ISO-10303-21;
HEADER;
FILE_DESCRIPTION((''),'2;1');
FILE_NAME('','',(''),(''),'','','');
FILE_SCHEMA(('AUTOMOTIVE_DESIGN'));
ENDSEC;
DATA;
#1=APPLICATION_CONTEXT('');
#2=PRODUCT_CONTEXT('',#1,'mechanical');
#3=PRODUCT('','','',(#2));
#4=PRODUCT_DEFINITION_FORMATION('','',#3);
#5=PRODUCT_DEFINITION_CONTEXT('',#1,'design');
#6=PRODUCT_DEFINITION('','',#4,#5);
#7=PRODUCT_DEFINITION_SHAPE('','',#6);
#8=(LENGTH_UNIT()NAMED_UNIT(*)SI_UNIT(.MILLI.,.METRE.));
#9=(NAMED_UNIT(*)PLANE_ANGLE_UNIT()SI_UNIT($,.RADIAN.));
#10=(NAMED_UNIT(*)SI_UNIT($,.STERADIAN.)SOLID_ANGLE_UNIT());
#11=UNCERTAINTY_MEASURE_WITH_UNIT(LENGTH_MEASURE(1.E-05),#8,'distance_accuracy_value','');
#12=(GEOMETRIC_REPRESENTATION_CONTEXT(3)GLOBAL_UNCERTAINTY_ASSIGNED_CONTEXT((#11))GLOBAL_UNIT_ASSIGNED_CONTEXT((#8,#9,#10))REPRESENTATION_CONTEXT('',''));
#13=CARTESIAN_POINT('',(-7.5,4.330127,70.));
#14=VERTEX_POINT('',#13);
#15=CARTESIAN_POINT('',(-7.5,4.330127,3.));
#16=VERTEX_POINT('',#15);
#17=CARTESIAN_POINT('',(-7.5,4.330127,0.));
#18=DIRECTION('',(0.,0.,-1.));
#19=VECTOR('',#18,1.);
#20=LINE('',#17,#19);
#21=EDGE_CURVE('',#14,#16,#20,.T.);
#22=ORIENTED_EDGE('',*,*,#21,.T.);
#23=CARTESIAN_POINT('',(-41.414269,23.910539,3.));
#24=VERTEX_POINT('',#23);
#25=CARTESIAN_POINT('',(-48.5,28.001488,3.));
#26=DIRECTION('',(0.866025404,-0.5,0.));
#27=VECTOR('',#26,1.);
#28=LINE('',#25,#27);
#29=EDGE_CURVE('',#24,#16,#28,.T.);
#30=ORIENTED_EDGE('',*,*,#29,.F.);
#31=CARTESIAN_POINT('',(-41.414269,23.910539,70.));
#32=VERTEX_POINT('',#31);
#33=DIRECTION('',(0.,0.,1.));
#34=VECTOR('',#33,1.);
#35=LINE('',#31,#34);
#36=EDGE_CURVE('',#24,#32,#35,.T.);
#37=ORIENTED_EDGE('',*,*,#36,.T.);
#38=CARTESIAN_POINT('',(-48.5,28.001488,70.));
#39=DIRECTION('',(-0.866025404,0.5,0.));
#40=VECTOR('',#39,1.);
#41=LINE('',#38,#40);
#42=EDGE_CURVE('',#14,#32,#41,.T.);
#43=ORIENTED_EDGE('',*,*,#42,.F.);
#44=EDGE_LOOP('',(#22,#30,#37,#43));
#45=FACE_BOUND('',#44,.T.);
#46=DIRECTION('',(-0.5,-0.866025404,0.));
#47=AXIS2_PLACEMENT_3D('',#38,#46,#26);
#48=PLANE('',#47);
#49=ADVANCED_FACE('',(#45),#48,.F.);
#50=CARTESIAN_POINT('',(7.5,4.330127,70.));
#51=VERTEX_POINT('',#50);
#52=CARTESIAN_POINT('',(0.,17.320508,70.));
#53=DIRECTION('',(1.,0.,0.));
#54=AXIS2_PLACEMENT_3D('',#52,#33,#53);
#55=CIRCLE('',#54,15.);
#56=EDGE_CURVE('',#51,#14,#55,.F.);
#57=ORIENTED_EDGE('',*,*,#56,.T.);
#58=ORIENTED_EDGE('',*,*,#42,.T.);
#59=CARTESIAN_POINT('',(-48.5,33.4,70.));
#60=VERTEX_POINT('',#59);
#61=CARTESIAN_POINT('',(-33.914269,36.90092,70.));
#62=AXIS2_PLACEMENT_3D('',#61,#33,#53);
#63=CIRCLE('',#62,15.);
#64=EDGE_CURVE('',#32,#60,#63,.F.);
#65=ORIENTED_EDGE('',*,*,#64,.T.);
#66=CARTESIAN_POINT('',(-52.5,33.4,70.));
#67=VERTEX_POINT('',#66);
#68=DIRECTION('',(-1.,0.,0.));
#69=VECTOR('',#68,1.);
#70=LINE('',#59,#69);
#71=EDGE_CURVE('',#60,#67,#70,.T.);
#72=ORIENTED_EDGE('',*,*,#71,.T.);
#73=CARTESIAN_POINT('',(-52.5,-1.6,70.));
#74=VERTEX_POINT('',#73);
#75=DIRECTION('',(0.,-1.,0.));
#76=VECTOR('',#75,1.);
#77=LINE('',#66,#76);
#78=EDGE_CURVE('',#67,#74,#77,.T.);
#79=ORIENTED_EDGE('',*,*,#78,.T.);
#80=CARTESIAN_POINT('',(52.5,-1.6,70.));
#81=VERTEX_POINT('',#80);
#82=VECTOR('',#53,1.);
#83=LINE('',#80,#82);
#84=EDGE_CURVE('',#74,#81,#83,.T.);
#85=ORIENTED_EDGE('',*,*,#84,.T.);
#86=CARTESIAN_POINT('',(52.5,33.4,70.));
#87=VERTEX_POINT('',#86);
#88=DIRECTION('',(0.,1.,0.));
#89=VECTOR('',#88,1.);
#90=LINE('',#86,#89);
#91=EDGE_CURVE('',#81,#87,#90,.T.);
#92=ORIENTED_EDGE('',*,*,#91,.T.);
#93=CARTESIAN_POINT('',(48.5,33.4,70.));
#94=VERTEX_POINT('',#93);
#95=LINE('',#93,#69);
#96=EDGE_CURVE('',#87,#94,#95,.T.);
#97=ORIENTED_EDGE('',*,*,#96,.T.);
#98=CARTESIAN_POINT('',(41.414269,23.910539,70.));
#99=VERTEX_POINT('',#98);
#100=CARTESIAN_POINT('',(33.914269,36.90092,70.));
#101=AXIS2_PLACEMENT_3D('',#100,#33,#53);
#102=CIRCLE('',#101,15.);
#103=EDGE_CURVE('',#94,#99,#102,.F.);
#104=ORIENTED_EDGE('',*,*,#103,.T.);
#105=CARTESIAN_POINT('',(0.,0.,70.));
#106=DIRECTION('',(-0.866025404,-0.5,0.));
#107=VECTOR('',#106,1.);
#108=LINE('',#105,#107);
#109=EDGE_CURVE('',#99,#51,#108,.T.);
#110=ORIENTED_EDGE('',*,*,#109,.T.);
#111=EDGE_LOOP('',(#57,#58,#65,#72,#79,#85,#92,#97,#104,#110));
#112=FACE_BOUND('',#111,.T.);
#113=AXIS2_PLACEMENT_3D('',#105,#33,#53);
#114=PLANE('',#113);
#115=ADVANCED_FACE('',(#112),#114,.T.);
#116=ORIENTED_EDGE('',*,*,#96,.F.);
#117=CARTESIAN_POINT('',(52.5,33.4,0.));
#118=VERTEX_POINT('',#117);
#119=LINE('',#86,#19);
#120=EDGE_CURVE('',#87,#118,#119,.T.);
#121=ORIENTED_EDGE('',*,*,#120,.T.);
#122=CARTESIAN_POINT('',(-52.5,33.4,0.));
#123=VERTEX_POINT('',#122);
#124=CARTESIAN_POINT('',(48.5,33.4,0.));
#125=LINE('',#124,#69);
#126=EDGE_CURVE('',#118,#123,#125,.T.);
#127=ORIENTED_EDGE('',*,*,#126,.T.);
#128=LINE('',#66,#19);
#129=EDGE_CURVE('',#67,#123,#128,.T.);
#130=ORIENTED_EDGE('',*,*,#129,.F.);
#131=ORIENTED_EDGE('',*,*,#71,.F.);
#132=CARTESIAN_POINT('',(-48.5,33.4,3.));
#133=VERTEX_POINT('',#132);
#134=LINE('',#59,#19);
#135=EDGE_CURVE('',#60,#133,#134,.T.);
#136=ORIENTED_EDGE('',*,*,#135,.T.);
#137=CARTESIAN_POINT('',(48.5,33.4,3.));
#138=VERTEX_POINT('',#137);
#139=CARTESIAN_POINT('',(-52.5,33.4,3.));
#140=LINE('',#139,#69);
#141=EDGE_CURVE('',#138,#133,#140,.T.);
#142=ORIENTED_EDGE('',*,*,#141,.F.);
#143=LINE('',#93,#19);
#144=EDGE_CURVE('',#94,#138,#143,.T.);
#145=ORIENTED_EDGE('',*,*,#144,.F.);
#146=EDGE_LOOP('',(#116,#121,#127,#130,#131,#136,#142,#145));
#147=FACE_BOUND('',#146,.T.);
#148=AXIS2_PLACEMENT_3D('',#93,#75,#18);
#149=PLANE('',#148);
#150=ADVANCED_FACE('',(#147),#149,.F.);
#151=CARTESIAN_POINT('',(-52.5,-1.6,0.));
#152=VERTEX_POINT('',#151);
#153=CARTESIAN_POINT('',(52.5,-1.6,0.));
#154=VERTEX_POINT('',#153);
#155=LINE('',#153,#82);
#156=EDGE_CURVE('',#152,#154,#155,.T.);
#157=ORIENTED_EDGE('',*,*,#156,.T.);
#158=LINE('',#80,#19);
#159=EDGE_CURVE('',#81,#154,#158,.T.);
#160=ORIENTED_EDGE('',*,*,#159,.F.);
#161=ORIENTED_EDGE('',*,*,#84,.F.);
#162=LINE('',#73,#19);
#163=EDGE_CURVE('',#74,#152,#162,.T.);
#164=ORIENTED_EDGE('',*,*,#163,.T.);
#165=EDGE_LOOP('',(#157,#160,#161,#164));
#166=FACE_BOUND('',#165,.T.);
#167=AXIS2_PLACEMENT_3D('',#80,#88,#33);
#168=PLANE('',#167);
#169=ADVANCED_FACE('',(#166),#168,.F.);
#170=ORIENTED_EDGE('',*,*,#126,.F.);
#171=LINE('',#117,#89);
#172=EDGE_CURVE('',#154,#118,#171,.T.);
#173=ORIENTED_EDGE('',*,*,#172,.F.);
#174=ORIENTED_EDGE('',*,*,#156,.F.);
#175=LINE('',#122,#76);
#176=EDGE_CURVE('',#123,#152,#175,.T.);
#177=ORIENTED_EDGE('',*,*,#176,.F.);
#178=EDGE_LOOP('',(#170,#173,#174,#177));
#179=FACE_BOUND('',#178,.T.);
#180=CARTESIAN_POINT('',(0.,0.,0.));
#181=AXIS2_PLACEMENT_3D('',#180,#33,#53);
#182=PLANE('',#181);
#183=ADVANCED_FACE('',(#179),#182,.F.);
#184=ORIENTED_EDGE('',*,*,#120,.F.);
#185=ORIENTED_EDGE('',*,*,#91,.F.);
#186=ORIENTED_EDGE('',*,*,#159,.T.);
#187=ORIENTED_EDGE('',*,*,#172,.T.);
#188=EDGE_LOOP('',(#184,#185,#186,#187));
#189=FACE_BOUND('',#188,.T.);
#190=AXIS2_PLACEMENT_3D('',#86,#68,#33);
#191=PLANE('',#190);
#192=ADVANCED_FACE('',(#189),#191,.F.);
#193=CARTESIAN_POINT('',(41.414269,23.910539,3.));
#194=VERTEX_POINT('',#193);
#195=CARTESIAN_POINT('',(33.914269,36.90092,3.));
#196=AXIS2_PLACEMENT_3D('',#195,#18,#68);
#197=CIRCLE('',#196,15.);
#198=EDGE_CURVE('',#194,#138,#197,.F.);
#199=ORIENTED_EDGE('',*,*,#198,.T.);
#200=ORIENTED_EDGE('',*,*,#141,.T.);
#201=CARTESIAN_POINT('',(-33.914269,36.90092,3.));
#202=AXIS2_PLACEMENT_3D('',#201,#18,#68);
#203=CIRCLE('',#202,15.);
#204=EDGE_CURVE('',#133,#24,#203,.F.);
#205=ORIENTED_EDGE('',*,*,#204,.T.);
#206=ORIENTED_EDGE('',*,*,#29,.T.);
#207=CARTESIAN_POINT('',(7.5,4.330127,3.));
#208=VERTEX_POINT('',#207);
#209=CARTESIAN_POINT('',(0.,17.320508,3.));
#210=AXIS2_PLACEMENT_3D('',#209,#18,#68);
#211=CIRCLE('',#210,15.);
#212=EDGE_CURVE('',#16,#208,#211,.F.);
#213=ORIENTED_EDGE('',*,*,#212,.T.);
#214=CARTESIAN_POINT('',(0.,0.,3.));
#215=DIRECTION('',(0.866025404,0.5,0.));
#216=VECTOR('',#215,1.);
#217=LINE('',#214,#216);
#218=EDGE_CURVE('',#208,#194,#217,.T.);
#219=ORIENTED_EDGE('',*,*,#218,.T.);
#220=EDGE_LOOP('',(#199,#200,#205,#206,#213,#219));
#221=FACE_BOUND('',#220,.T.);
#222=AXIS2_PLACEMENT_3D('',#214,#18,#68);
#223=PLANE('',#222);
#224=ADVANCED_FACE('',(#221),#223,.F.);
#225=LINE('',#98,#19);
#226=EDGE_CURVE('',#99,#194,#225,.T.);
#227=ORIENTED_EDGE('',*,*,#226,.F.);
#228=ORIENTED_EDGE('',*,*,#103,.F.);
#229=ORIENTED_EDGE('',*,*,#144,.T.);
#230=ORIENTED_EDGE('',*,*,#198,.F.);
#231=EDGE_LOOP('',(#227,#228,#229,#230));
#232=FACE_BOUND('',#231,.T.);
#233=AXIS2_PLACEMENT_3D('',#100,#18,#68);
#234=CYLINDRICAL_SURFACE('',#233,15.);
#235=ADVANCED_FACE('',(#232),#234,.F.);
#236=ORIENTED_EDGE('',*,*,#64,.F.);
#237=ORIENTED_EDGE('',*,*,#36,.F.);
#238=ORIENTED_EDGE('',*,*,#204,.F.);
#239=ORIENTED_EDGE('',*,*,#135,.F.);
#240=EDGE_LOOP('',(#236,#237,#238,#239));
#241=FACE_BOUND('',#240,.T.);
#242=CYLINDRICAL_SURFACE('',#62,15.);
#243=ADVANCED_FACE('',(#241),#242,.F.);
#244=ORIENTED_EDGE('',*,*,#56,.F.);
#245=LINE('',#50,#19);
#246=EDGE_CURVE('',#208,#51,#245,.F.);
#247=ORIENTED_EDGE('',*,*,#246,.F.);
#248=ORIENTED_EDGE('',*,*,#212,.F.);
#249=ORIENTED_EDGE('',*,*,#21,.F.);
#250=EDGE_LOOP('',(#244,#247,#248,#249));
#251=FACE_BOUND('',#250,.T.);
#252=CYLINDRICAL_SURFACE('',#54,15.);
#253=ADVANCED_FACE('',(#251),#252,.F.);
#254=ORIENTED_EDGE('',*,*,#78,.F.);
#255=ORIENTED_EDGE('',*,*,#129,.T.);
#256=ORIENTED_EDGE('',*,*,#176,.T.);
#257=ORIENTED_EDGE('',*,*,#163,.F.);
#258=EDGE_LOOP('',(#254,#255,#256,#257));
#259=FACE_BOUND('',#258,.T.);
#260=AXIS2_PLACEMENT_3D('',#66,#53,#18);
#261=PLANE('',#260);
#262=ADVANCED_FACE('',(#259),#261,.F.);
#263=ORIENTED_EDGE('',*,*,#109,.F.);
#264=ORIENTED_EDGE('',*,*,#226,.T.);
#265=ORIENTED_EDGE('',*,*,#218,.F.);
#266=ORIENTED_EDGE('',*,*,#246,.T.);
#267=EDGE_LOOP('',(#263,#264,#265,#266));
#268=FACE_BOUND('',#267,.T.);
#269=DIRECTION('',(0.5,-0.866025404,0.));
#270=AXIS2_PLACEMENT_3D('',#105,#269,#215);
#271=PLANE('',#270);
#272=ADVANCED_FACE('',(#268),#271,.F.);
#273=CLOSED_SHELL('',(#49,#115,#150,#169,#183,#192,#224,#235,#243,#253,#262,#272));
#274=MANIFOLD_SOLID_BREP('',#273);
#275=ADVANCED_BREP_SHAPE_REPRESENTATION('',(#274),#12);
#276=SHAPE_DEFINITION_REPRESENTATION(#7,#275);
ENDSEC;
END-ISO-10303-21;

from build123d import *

# Parameters (mm, degrees)
BOSS_EXTRU_1_DEPTH = 70
CONG_1_R           = 15
ESQUISSE2_W        = 105
ESQUISSE2_H        = 35
BOSS_EXTRU_2_DEPTH = 3


with BuildPart() as part:
    # Esquisse1 → Boss.-Extru.1 (new body)
    with BuildSketch(Plane.XY):
        Polygon((0, 0), (48.5, 28.001488056), (48.5, 33.4), (52.5, 33.4), (52.5, -1.6), (-52.5, -1.6), (-52.5, 33.4), (-48.5, 33.4), (-48.5, 28.001488056), align=None)
    extrude(amount=BOSS_EXTRU_1_DEPTH)

    # Congé1
    # the kernel refuses this fillet: 15 mm, written as the material it adds along each edge
    with BuildSketch(Plane(origin=(0, 0, 0), x_dir=(0.866025403784438, 0.5000000000000011, 0), z_dir=(0, 0, 1))) as cong_1_piece_1:
        with BuildLine():
            CenterArc((CONG_1_R * 0.57735026919, CONG_1_R), CONG_1_R, 210, 60)
            Line((-CONG_1_R * 0.288675134595, CONG_1_R * 0.5), (-CONG_1_R * 0.305995642671, CONG_1_R * 0.49))
            Line((-CONG_1_R * 0.305995642671, CONG_1_R * 0.49), (-CONG_1_R * 0.0115470053838, -CONG_1_R * 0.02))
            Line((-CONG_1_R * 0.0115470053838, -CONG_1_R * 0.02), (CONG_1_R * 0.57735026919, -CONG_1_R * 0.02))
            Line((CONG_1_R * 0.57735026919, -CONG_1_R * 0.02), (CONG_1_R * 0.57735026919, 0))
        make_face()
    extrude(amount=70)
    with BuildSketch(Plane(origin=(48.5, 28.001488056, 0), x_dir=(-0.8660254037844379, -0.5000000000000011, 0), z_dir=(0, 0, 1))) as cong_1_piece_2:
        with BuildLine():
            CenterArc((8.181897743, -15), CONG_1_R, 90, 46.502986309)
            Line((-2.699255972, -4.675248486), (-2.916879046, -4.468753456))
            ThreePointArc((-2.916879046, -4.468753456), (-1.609435607, -2.187624243), (-0.259807621, 0.15))
            Line((-0.259807621, 0.15), (0, 0.3))
            Line((0, 0.3), (8.181897743, 0.3))
            Line((8.181897743, 0.3), (8.181897743, 0))
        make_face()
    extrude(amount=70)
    with BuildSketch(Plane(origin=(-48.5, 28.001488056, 0), x_dir=(0, 1, 0), z_dir=(0, 0, 1))) as cong_1_piece_3:
        with BuildLine():
            CenterArc((8.899432185, -14.585731297), CONG_1_R, 103.497013691, 46.502986309)
            Line((-4.090948872, -7.085731297), (-4.350756493, -6.935731297))
            Line((-4.350756493, -6.935731297), (-0.259807621, 0.15))
            Line((-0.259807621, 0.15), (0, 0.3))
            ThreePointArc((0, 0.3), (2.699255972, 0.3), (5.328493539, 0.291714626))
            Line((5.328493539, 0.291714626), (5.398511944, 0))
        make_face()
    extrude(amount=70)

    # Esquisse2 → Boss.-Extru.2 (add)
    with BuildSketch(Plane.XY):
        with Locations((0, 15.9)):
            Rectangle(ESQUISSE2_W, ESQUISSE2_H)
    extrude(amount=BOSS_EXTRU_2_DEPTH)


solid = part.part
